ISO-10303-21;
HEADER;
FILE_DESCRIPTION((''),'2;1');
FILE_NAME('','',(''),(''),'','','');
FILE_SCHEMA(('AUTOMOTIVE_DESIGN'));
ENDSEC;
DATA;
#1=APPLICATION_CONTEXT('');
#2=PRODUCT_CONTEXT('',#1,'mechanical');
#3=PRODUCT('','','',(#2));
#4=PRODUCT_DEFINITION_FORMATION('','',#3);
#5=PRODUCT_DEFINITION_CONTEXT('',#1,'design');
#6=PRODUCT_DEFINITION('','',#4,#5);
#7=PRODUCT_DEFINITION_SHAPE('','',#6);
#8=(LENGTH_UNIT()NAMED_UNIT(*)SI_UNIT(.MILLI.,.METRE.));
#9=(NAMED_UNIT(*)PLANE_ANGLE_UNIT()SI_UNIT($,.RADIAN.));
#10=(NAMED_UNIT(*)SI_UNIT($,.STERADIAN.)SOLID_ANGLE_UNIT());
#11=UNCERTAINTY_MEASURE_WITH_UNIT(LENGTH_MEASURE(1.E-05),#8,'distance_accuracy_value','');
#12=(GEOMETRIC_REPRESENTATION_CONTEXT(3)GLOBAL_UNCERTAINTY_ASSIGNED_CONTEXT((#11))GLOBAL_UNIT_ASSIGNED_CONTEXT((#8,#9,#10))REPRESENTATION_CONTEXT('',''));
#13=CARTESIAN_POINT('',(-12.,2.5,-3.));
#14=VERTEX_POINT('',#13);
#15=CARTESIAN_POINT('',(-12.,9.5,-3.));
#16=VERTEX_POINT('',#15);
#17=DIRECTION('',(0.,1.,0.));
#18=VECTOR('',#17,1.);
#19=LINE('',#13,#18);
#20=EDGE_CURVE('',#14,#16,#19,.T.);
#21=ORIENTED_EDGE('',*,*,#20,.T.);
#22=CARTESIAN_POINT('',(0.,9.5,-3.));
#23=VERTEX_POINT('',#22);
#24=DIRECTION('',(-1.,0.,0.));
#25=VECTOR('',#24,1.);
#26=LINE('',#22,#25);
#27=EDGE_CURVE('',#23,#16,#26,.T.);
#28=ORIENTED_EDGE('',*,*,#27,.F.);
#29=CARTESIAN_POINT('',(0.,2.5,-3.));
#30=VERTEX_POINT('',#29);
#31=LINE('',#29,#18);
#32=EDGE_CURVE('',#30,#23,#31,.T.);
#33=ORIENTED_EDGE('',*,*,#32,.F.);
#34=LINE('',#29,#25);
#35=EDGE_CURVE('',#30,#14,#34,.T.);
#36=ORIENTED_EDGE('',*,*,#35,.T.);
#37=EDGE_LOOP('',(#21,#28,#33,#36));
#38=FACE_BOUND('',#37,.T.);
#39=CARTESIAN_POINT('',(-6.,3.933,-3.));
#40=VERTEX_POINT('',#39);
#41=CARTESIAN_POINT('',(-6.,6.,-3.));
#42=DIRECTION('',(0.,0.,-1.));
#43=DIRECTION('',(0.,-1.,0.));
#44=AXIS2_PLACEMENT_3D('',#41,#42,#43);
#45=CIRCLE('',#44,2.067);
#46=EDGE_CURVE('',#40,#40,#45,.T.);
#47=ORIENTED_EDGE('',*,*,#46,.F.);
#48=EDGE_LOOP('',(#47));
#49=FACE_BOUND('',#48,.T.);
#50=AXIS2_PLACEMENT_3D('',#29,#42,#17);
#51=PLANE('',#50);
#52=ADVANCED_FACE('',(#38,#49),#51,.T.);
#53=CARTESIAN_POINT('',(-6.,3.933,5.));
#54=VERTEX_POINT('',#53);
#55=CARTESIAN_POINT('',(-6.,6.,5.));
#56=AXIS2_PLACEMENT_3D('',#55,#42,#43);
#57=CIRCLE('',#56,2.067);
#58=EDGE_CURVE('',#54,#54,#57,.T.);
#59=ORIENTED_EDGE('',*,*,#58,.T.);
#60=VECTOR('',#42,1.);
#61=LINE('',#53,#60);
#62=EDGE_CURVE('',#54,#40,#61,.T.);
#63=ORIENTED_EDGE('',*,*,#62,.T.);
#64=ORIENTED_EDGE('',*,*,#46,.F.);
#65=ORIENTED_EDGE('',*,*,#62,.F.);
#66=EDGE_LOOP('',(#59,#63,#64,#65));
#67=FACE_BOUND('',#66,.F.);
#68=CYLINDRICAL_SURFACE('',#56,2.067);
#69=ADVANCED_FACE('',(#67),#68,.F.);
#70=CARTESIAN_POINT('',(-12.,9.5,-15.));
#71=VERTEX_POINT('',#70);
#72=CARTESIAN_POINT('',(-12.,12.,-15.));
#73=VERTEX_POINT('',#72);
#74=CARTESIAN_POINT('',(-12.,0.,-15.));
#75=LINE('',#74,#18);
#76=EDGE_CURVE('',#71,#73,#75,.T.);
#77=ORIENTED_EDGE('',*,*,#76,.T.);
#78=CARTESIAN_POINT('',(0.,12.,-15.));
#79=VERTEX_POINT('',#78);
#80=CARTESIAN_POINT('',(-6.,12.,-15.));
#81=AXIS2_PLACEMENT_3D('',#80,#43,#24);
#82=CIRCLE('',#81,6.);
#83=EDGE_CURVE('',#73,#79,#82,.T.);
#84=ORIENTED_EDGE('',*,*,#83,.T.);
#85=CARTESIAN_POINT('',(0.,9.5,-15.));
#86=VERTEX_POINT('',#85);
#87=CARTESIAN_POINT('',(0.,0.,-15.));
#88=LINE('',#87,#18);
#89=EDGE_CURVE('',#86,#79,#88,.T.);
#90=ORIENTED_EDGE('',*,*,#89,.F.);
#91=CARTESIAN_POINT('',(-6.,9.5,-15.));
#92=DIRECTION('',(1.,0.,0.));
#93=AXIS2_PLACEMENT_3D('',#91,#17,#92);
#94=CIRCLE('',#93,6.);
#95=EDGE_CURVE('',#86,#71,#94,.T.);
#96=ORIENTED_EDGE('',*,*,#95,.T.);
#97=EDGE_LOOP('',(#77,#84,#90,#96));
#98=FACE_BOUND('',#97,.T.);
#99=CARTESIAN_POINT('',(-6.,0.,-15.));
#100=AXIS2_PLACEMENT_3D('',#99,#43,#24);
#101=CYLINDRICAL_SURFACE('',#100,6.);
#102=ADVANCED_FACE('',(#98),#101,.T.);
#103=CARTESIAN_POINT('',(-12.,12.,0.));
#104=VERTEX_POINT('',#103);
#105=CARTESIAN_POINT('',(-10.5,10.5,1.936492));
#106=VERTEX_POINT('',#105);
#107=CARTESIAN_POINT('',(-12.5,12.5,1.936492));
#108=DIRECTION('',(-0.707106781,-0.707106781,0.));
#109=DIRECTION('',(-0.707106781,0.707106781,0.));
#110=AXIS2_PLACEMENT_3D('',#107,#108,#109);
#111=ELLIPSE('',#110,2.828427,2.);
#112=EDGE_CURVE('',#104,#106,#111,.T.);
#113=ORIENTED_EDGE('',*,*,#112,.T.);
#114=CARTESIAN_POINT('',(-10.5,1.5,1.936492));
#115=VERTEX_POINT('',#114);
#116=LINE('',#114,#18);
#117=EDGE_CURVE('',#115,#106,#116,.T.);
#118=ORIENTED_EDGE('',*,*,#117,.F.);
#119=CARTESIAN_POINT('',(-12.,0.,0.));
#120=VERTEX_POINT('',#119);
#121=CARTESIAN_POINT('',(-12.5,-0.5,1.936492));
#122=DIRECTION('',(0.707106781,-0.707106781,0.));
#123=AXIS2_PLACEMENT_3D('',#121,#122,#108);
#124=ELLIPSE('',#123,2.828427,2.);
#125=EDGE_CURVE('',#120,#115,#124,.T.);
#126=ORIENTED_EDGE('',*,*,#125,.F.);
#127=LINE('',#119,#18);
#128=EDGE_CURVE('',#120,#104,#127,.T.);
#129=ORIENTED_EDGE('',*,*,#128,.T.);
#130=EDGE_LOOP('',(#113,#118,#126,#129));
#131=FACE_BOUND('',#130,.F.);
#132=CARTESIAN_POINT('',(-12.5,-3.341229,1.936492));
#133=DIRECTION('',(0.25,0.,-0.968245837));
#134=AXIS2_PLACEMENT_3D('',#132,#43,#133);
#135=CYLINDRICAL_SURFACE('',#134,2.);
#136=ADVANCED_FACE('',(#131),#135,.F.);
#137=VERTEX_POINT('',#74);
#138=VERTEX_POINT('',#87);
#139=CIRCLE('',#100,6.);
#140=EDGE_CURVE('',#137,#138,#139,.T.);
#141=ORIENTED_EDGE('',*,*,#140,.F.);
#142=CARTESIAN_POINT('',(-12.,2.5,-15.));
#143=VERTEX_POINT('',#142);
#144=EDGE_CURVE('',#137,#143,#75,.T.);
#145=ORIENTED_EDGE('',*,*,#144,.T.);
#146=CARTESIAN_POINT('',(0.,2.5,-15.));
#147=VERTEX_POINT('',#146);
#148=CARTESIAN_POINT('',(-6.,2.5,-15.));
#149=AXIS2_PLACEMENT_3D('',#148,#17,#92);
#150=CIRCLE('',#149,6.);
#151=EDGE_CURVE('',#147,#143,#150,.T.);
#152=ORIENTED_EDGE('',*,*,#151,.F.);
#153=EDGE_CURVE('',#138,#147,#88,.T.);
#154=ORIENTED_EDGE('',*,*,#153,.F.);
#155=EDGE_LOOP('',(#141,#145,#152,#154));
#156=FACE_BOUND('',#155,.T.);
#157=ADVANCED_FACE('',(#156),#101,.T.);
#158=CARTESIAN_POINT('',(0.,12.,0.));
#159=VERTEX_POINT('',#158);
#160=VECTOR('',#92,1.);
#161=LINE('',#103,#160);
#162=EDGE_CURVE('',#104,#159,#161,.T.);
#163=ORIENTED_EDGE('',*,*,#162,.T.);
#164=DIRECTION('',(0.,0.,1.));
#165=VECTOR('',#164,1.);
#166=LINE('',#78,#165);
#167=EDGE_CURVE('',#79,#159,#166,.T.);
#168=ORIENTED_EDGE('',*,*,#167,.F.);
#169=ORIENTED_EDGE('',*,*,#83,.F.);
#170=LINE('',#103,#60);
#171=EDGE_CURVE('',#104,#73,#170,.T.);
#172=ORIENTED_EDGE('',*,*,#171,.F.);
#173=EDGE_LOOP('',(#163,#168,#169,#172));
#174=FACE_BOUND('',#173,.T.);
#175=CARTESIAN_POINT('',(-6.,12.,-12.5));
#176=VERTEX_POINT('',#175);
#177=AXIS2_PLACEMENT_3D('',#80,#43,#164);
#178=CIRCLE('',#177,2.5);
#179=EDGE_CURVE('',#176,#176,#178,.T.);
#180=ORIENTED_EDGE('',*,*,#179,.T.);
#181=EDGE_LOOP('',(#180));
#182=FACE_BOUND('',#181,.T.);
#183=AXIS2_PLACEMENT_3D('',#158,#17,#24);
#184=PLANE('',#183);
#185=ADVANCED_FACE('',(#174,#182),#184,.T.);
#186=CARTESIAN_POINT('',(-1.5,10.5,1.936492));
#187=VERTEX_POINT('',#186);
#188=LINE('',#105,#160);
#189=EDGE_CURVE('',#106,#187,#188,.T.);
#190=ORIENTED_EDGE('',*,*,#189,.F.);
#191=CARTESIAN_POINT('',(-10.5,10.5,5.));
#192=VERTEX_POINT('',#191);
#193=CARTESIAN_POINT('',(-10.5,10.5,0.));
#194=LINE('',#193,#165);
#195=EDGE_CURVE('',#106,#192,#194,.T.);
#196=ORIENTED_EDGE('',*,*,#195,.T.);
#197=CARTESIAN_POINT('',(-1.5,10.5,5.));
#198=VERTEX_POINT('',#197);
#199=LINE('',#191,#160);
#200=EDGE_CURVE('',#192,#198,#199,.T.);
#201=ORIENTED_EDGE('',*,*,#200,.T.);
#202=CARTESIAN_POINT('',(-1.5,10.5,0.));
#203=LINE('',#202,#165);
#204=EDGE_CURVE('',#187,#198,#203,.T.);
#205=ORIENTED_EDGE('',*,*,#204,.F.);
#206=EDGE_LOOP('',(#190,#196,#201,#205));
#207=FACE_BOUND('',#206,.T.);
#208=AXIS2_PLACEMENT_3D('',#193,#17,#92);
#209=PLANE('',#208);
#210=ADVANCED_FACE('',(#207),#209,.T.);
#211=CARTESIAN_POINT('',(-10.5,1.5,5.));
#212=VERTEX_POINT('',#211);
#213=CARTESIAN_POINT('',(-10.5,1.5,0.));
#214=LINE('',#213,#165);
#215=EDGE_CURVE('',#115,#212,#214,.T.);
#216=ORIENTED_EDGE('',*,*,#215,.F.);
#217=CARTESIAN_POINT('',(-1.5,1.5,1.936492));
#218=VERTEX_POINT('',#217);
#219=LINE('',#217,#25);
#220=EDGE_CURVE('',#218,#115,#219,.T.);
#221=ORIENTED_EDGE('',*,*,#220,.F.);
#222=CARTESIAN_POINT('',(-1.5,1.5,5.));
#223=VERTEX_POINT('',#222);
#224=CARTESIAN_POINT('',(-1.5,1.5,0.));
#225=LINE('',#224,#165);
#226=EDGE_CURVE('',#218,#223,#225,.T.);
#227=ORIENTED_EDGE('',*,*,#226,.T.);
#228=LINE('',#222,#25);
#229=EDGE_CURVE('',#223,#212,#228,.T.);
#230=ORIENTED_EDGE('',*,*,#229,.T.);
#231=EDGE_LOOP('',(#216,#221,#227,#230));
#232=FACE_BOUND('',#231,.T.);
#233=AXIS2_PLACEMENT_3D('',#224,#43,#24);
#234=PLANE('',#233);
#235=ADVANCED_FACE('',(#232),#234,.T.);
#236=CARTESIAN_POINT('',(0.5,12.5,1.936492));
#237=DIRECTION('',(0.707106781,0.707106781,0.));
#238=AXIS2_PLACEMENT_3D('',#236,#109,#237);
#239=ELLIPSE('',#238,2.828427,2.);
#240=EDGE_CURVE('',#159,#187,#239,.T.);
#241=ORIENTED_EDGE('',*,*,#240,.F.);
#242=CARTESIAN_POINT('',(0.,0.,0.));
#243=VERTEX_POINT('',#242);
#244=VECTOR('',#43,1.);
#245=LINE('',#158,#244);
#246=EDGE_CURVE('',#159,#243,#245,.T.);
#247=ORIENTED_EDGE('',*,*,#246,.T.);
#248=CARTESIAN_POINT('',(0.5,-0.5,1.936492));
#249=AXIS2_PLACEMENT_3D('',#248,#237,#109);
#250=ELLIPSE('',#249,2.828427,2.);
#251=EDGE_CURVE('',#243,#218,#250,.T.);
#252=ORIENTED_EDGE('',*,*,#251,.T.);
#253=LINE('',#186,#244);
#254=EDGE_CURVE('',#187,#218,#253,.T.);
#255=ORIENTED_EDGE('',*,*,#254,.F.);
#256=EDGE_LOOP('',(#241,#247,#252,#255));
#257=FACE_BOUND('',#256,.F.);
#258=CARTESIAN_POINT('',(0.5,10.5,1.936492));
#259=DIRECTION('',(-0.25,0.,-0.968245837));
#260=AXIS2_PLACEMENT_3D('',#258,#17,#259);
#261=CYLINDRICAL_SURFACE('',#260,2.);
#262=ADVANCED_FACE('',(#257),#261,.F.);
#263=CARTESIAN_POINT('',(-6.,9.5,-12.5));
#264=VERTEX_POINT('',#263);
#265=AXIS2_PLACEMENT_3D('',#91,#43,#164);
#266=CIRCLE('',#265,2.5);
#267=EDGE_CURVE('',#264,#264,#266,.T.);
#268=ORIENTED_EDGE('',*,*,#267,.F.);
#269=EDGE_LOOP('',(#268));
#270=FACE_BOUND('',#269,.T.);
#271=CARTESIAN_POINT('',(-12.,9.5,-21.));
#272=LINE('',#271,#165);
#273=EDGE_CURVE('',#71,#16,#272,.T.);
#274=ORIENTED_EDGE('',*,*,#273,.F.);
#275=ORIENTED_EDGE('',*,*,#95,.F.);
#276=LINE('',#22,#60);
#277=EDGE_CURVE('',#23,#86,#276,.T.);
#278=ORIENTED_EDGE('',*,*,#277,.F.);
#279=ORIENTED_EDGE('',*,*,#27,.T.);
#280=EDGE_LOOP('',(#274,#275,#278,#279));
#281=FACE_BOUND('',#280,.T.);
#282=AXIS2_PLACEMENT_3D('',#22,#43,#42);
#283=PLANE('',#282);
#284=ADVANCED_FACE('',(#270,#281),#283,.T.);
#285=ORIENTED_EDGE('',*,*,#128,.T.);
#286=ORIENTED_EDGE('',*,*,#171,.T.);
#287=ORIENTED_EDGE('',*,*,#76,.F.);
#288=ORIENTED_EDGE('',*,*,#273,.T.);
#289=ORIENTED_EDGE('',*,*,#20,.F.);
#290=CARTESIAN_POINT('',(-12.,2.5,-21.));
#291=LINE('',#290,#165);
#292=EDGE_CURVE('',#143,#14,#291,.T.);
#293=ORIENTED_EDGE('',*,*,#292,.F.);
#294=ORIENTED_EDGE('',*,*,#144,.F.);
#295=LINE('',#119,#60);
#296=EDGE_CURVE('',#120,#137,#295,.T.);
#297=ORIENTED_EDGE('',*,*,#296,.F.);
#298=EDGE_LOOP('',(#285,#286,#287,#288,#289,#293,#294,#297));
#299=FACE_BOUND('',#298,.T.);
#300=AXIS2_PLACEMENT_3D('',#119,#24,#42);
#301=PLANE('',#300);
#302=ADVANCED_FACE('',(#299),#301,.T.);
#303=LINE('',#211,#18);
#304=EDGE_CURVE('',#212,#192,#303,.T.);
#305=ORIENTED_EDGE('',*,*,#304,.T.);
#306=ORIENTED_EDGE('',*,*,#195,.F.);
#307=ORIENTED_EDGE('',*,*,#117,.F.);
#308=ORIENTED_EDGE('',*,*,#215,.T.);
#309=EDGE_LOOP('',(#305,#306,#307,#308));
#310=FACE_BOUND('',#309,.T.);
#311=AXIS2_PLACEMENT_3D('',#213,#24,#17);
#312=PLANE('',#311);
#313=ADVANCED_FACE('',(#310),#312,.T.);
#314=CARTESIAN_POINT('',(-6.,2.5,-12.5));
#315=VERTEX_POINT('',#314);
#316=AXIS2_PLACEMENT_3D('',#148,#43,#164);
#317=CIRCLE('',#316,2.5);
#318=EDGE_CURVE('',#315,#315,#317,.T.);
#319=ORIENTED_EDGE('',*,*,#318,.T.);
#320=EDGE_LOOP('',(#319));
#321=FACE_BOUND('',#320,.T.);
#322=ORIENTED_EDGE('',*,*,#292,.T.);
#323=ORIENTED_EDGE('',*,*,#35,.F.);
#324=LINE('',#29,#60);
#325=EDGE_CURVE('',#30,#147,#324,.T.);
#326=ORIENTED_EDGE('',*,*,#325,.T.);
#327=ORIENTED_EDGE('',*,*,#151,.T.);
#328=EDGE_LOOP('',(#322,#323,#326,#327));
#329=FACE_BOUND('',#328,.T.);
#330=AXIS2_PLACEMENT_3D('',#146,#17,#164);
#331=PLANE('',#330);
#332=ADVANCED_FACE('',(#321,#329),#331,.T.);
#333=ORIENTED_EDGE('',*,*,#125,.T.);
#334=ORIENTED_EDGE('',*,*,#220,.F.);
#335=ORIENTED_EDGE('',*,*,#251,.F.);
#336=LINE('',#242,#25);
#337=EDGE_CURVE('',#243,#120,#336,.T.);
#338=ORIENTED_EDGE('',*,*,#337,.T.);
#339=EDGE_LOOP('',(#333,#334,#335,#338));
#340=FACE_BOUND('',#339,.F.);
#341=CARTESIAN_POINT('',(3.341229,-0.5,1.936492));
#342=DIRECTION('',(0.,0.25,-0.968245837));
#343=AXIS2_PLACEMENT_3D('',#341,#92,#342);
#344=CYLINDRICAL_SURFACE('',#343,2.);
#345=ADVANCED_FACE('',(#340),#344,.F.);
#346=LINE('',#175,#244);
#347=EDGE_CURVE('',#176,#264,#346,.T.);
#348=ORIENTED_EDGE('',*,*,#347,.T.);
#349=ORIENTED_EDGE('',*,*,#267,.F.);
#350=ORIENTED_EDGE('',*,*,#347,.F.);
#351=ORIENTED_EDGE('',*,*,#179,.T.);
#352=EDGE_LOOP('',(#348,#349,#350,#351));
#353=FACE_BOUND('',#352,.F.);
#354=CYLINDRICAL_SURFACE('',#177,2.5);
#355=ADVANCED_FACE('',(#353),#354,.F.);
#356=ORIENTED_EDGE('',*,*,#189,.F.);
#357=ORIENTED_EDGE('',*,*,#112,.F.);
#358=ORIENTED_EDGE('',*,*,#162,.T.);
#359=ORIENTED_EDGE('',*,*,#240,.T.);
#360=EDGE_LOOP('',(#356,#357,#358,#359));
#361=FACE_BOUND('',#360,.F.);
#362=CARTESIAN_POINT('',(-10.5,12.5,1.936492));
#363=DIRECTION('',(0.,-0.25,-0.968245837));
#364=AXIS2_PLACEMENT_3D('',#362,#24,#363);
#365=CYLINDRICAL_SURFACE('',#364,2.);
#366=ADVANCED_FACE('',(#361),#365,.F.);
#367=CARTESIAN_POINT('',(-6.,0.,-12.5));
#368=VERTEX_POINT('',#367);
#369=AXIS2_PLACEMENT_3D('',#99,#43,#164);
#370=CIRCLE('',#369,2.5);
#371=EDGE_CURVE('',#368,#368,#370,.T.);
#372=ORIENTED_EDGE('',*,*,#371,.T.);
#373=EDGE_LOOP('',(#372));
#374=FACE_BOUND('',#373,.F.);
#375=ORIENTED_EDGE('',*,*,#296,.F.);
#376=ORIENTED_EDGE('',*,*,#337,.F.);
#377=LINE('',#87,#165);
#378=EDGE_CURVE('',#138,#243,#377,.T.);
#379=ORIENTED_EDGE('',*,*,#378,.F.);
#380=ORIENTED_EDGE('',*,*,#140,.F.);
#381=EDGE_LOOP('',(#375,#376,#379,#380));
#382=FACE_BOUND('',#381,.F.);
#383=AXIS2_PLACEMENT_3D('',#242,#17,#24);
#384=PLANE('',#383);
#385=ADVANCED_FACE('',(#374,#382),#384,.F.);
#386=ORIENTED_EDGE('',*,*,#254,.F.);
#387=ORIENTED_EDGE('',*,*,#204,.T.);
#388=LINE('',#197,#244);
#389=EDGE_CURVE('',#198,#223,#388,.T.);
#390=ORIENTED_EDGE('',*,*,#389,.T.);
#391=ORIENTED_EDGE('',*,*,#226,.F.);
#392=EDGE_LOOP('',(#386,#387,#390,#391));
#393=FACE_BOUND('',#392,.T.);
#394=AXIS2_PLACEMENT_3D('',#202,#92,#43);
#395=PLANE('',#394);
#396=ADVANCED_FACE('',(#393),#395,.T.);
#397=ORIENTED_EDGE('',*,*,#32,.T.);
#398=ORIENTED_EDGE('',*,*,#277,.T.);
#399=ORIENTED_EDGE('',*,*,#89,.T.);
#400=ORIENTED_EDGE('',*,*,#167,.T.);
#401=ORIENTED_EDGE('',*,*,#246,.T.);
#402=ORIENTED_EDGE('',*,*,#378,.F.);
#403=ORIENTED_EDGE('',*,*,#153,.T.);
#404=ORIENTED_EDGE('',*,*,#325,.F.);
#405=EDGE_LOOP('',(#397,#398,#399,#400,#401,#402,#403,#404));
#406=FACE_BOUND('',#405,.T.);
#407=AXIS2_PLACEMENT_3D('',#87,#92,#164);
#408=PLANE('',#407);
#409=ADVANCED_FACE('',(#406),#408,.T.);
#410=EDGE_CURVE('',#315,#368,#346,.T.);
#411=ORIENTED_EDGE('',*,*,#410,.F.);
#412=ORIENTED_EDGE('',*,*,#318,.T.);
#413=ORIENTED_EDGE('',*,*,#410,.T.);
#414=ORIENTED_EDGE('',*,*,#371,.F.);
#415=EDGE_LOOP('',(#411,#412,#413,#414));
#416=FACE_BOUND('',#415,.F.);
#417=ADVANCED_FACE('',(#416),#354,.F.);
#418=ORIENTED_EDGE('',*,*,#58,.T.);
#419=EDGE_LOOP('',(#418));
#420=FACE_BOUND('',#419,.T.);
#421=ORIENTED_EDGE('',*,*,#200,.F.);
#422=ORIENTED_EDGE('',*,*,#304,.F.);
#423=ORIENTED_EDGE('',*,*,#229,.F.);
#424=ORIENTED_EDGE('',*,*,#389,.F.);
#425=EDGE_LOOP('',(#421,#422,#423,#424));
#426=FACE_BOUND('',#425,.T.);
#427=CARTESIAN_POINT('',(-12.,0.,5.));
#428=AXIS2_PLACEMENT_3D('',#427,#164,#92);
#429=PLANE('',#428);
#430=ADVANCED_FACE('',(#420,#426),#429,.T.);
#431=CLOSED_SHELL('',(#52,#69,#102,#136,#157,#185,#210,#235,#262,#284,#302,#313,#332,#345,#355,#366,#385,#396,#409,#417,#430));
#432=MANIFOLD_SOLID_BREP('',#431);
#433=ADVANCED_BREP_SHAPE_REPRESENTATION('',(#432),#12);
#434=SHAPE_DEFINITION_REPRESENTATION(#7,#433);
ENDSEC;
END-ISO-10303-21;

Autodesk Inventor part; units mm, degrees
ref_plane "YZ Plane" through (0, 0, 0) normal (1, 0, 0) x (0, 1, 0)
ref_plane "XZ Plane" through (0, 0, 0) normal (0, 1, 0) x (-1, 0, 0)
ref_plane "XY Plane" through (0, 0, 0) normal (0, 0, 1) x (1, 0, 0)
sketch "Sketch1" plane through (0, 0, 0) normal (0, 1, 0) x (-1, 0, 0)
  line L0 (0, 0) -> (12, 0)
  line L1 (12, 0) -> (12, -15)
  line L2 (12, -15) -> (0, -15)
  line L3 (0, -15) -> (0, 0)
  dimension "d0" = 12
  dimension "d1" = 15
extrude "Extrusion1" add sketch "Sketch1" along normal blind 12
sketch "Sketch4" plane through (0, 0, 0) normal (0, -1, 0) x (1, 0, 0)
  line L0 (0, -15) -> (-12, -15) projected
  arc A0 (-12, -15) -> (0, -15) centre (-6, -15) ccw
  point P0 (0, 0)
  point P1 (-6, -15)
extrude "Extrusion2" add sketch "Sketch4" against normal up to surface (12 mm away)
sketch "Sketch5" plane through (0, 0, 0) normal (1, 0, 0) x (0, 0, -1)
  line L0 (3, 9.5) -> (21, 9.5)
  line L1 (21, 9.5) -> (21, 2.5)
  line L2 (21, 2.5) -> (3, 2.5)
  line L3 (3, 2.5) -> (3, 9.5)
  line L4 (15, 12) -> (15, 12) projected
  line L5 (15, 0) -> (15, 12) projected
  line L6 (15, 0) -> (15, 0) projected
  line L7 (15, 0) -> (15, 12) projected
  line L8 (21, 0) -> (21, 12) projected
  line L9 (0, 0) -> (0, 12) projected
  point P0 (21, 6)
  point P1 (3, 6)
  point P2 (0, 6)
  dimension "d8" = 18
  dimension "d9" = 7
extrude "Extrusion3" cut sketch "Sketch5" against normal up to surface (12 mm away)
sketch "Sketch6" plane through (0, 12, 0) normal (0, 1, 0) x (1, 0, 0)
  arc A0 (0, 15) -> (-12, 15) centre (-6, 15) ccw projected
  point P0 (0, 0)
hole "Hole1" at (-6, 12, -15) direction (0, -1, 0) diameter 5 depth 12
sketch "Sketch7" plane through (-12, 0, 0) normal (0, 0, 1) x (1, 0, 0)
  line L0 (10.5, 1.5) -> (1.5, 1.5)
  line L1 (1.5, 1.5) -> (1.5, 10.5)
  line L2 (1.5, 10.5) -> (10.5, 10.5)
  line L3 (10.5, 10.5) -> (10.5, 1.5)
  line L4 (0, 0) -> (0, 12) projected
  line L5 (0, 0) -> (12, 0) projected
  point P0 (1.5, 6)
  point P1 (0, 6)
  point P2 (6, 1.5)
  point P3 (6, 0)
  dimension "d19" = 9
  dimension "d20" = 9
extrude "Extrusion4" add sketch "Sketch7" along normal blind 5
fillet "Fillet1" radius 2 4 edges at (-6, 1.5, 0) (-10.5, 6, 0) (-6, 10.5, 0) (-1.5, 6, 0)
sketch "Sketch8" plane through (-12, 0, 5) normal (0, 0, 1) x (1, 0, 0)
  line L0 (10.5, 1.5) -> (10.5, 10.5) projected
  line L1 (1.5, 1.5) -> (10.5, 1.5) projected
  point P0 (12, 0)
  point P1 (6, 6)
  point P2 (10.5, 6)
  point P3 (6, 1.5)
hole "Hole2" at (-6, 6, 5) direction (0, 0, -1) diameter 4.134 depth 8 thread size "M5x0.8" class "6H" standard "ISO Metric profile"
properties part number "2063"
